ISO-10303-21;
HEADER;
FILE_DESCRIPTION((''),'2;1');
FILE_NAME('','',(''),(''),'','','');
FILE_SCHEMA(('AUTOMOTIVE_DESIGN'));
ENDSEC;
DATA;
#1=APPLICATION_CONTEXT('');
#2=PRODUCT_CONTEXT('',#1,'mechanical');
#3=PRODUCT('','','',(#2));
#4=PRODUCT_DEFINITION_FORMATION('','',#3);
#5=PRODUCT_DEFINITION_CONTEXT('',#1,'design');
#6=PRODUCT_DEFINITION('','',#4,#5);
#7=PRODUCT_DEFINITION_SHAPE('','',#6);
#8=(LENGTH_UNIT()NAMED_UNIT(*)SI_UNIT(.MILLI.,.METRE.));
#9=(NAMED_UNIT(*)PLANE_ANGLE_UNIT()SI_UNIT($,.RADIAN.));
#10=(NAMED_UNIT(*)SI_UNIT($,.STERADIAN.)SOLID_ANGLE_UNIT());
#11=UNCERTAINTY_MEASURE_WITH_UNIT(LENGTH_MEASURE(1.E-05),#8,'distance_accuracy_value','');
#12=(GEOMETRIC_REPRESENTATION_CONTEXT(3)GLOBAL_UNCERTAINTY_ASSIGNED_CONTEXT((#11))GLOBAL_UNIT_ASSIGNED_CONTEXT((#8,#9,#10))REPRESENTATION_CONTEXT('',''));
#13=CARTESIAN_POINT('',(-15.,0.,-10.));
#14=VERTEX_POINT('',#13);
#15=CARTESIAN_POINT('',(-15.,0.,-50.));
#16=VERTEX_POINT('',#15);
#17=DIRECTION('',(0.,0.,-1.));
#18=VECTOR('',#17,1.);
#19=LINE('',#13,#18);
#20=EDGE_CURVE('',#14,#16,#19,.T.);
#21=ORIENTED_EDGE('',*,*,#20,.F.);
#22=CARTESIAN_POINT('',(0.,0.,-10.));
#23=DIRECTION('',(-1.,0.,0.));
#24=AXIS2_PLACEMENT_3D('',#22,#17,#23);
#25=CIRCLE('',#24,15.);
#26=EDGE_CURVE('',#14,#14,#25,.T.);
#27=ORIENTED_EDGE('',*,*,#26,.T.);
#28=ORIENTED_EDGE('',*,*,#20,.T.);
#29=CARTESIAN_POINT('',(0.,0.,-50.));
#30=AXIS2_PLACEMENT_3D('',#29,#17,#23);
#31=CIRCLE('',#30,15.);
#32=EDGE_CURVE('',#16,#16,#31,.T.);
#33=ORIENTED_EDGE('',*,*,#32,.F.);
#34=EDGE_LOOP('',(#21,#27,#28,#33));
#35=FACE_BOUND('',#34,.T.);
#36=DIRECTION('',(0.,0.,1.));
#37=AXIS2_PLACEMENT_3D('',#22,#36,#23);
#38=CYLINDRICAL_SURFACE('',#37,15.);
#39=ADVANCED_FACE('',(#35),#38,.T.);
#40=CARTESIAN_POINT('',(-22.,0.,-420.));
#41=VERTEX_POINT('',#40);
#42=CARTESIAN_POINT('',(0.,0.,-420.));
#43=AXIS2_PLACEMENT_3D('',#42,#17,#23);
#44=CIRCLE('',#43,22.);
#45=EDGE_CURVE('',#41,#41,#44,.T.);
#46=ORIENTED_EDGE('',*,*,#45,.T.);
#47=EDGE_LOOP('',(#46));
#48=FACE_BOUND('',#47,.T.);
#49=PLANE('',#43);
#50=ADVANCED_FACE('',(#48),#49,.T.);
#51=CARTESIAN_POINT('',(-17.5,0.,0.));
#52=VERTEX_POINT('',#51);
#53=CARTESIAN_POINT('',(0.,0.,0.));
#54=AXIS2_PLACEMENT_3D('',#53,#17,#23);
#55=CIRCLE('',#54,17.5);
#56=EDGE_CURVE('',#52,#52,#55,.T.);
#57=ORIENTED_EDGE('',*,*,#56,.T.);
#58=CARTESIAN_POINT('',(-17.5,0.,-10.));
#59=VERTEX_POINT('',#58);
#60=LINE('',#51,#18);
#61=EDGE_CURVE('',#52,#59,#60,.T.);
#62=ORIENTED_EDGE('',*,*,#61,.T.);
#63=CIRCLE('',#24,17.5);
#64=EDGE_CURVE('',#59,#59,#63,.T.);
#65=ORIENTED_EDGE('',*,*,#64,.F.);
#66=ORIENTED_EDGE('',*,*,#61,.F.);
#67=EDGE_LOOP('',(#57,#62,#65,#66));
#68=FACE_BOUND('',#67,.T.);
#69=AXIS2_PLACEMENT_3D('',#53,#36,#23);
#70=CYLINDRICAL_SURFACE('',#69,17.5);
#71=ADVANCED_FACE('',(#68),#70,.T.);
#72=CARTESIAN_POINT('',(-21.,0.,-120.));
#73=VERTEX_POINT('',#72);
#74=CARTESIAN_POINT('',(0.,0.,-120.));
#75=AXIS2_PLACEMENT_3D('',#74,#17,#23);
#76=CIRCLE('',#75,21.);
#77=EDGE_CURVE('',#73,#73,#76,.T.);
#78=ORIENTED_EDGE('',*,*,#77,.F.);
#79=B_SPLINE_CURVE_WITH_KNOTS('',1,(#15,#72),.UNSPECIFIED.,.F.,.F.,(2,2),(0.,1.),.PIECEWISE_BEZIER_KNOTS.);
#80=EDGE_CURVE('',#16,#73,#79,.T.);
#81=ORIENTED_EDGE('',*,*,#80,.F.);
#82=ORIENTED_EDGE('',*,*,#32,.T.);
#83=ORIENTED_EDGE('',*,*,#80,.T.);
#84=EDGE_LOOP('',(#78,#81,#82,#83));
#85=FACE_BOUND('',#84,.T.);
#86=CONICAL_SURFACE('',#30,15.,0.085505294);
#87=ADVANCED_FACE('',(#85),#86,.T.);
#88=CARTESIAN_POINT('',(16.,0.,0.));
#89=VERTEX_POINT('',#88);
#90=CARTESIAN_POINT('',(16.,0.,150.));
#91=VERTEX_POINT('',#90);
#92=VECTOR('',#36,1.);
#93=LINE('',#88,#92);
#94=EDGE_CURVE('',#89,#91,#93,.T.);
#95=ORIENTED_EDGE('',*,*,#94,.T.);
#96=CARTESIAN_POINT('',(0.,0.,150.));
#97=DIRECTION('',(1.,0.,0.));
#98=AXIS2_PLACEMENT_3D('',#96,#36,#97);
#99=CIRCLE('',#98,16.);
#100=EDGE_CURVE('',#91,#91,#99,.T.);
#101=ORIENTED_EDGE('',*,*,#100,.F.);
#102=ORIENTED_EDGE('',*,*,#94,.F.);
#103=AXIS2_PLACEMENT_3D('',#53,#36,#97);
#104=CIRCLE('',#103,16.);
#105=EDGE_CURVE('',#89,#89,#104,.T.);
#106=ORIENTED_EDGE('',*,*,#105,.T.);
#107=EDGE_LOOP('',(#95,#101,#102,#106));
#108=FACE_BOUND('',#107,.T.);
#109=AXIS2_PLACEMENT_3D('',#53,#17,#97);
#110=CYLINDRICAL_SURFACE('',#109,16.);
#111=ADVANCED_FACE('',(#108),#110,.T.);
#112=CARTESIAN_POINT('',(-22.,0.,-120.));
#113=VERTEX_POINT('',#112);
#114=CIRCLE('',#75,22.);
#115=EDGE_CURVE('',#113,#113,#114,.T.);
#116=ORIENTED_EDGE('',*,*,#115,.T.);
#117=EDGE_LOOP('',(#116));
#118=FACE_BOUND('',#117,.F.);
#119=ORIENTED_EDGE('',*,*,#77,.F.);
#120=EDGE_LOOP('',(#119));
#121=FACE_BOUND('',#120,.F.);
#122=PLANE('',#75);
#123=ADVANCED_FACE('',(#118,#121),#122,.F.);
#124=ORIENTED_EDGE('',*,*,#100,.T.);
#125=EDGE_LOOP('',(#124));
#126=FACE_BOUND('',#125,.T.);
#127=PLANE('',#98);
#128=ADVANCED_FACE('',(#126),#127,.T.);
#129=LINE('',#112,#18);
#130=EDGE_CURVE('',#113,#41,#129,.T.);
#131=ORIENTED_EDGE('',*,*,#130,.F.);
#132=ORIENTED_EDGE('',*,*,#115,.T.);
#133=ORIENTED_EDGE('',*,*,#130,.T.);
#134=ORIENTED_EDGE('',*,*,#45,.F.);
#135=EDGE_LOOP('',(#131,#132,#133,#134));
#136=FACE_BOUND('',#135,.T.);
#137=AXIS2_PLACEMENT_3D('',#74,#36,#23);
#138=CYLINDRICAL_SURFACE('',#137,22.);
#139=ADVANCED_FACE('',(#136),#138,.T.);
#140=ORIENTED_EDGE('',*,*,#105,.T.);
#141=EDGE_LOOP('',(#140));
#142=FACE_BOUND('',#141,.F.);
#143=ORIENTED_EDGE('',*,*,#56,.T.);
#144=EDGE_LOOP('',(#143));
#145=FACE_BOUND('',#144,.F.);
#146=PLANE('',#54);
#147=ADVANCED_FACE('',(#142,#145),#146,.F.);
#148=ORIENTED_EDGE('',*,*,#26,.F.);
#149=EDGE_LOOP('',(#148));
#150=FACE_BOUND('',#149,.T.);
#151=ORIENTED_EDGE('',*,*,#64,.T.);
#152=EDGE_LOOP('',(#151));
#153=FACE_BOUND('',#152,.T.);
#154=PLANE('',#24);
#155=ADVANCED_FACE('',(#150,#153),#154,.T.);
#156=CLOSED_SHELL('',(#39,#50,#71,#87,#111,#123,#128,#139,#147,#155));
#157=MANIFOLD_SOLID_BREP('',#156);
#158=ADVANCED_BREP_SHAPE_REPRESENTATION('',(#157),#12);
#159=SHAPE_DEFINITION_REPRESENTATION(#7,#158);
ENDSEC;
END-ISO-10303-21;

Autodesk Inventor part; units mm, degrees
ref_plane "YZ Plane" through (0, 0, 0) normal (1, 0, 0) x (0, 1, 0)
ref_plane "XZ Plane" through (0, 0, 0) normal (0, 1, 0) x (-1, 0, 0)
sketch "Sketch1" plane through (0, 0, 0) normal (0, 0, 1) x (1, 0, 0)
  circle A0 centre (0, 0) radius 16
  dimension "d0" = 32
extrude "Extrusion1" add sketch "Sketch1" along normal blind 150
sketch "Sketch2" plane through (0, 0, 0) normal (0, 0, -1) x (-1, 0, 0)
  circle A0 centre (0, 0) radius 17.5
  dimension "d3" = 35
extrude "Extrusion2" add sketch "Sketch2" along normal blind 10
sketch "Sketch3" plane through (0, 0, -10) normal (0, 0, -1) x (-1, 0, 0)
  circle A0 centre (0, 0) radius 15
  dimension "d6" = 30
extrude "Extrusion3" add sketch "Sketch3" along normal blind 40
sketch "Sketch4" plane through (0, 0, -50) normal (0, 0, -1) x (-1, 0, 0)
  circle A0 centre (0, 0) radius 15
  dimension "d10" = 30
ref_plane "Work Plane1" through (0, 0, -120) normal (0, 0, -1) x (-1, 0, 0)
sketch "Sketch5" plane through (0, 0, -120) normal (0, 0, -1) x (-1, 0, 0)
  circle A0 centre (0, 0) radius 16 projected
  circle A1 centre (0, 0) radius 21
  dimension "d11" = 42
loft "Loft1" add profiles "Sketch5" section 1 edges at (15, 0, -50) contours A0 | A1
sketch "Sketch6" plane through (0, 0, -120) normal (0, 0, -1) x (-1, 0, 0)
  circle A0 centre (0, 0) radius 22
  dimension "d16" = 44
extrude "Extrusion4" add sketch "Sketch6" along normal blind 300
properties part number "oar"
